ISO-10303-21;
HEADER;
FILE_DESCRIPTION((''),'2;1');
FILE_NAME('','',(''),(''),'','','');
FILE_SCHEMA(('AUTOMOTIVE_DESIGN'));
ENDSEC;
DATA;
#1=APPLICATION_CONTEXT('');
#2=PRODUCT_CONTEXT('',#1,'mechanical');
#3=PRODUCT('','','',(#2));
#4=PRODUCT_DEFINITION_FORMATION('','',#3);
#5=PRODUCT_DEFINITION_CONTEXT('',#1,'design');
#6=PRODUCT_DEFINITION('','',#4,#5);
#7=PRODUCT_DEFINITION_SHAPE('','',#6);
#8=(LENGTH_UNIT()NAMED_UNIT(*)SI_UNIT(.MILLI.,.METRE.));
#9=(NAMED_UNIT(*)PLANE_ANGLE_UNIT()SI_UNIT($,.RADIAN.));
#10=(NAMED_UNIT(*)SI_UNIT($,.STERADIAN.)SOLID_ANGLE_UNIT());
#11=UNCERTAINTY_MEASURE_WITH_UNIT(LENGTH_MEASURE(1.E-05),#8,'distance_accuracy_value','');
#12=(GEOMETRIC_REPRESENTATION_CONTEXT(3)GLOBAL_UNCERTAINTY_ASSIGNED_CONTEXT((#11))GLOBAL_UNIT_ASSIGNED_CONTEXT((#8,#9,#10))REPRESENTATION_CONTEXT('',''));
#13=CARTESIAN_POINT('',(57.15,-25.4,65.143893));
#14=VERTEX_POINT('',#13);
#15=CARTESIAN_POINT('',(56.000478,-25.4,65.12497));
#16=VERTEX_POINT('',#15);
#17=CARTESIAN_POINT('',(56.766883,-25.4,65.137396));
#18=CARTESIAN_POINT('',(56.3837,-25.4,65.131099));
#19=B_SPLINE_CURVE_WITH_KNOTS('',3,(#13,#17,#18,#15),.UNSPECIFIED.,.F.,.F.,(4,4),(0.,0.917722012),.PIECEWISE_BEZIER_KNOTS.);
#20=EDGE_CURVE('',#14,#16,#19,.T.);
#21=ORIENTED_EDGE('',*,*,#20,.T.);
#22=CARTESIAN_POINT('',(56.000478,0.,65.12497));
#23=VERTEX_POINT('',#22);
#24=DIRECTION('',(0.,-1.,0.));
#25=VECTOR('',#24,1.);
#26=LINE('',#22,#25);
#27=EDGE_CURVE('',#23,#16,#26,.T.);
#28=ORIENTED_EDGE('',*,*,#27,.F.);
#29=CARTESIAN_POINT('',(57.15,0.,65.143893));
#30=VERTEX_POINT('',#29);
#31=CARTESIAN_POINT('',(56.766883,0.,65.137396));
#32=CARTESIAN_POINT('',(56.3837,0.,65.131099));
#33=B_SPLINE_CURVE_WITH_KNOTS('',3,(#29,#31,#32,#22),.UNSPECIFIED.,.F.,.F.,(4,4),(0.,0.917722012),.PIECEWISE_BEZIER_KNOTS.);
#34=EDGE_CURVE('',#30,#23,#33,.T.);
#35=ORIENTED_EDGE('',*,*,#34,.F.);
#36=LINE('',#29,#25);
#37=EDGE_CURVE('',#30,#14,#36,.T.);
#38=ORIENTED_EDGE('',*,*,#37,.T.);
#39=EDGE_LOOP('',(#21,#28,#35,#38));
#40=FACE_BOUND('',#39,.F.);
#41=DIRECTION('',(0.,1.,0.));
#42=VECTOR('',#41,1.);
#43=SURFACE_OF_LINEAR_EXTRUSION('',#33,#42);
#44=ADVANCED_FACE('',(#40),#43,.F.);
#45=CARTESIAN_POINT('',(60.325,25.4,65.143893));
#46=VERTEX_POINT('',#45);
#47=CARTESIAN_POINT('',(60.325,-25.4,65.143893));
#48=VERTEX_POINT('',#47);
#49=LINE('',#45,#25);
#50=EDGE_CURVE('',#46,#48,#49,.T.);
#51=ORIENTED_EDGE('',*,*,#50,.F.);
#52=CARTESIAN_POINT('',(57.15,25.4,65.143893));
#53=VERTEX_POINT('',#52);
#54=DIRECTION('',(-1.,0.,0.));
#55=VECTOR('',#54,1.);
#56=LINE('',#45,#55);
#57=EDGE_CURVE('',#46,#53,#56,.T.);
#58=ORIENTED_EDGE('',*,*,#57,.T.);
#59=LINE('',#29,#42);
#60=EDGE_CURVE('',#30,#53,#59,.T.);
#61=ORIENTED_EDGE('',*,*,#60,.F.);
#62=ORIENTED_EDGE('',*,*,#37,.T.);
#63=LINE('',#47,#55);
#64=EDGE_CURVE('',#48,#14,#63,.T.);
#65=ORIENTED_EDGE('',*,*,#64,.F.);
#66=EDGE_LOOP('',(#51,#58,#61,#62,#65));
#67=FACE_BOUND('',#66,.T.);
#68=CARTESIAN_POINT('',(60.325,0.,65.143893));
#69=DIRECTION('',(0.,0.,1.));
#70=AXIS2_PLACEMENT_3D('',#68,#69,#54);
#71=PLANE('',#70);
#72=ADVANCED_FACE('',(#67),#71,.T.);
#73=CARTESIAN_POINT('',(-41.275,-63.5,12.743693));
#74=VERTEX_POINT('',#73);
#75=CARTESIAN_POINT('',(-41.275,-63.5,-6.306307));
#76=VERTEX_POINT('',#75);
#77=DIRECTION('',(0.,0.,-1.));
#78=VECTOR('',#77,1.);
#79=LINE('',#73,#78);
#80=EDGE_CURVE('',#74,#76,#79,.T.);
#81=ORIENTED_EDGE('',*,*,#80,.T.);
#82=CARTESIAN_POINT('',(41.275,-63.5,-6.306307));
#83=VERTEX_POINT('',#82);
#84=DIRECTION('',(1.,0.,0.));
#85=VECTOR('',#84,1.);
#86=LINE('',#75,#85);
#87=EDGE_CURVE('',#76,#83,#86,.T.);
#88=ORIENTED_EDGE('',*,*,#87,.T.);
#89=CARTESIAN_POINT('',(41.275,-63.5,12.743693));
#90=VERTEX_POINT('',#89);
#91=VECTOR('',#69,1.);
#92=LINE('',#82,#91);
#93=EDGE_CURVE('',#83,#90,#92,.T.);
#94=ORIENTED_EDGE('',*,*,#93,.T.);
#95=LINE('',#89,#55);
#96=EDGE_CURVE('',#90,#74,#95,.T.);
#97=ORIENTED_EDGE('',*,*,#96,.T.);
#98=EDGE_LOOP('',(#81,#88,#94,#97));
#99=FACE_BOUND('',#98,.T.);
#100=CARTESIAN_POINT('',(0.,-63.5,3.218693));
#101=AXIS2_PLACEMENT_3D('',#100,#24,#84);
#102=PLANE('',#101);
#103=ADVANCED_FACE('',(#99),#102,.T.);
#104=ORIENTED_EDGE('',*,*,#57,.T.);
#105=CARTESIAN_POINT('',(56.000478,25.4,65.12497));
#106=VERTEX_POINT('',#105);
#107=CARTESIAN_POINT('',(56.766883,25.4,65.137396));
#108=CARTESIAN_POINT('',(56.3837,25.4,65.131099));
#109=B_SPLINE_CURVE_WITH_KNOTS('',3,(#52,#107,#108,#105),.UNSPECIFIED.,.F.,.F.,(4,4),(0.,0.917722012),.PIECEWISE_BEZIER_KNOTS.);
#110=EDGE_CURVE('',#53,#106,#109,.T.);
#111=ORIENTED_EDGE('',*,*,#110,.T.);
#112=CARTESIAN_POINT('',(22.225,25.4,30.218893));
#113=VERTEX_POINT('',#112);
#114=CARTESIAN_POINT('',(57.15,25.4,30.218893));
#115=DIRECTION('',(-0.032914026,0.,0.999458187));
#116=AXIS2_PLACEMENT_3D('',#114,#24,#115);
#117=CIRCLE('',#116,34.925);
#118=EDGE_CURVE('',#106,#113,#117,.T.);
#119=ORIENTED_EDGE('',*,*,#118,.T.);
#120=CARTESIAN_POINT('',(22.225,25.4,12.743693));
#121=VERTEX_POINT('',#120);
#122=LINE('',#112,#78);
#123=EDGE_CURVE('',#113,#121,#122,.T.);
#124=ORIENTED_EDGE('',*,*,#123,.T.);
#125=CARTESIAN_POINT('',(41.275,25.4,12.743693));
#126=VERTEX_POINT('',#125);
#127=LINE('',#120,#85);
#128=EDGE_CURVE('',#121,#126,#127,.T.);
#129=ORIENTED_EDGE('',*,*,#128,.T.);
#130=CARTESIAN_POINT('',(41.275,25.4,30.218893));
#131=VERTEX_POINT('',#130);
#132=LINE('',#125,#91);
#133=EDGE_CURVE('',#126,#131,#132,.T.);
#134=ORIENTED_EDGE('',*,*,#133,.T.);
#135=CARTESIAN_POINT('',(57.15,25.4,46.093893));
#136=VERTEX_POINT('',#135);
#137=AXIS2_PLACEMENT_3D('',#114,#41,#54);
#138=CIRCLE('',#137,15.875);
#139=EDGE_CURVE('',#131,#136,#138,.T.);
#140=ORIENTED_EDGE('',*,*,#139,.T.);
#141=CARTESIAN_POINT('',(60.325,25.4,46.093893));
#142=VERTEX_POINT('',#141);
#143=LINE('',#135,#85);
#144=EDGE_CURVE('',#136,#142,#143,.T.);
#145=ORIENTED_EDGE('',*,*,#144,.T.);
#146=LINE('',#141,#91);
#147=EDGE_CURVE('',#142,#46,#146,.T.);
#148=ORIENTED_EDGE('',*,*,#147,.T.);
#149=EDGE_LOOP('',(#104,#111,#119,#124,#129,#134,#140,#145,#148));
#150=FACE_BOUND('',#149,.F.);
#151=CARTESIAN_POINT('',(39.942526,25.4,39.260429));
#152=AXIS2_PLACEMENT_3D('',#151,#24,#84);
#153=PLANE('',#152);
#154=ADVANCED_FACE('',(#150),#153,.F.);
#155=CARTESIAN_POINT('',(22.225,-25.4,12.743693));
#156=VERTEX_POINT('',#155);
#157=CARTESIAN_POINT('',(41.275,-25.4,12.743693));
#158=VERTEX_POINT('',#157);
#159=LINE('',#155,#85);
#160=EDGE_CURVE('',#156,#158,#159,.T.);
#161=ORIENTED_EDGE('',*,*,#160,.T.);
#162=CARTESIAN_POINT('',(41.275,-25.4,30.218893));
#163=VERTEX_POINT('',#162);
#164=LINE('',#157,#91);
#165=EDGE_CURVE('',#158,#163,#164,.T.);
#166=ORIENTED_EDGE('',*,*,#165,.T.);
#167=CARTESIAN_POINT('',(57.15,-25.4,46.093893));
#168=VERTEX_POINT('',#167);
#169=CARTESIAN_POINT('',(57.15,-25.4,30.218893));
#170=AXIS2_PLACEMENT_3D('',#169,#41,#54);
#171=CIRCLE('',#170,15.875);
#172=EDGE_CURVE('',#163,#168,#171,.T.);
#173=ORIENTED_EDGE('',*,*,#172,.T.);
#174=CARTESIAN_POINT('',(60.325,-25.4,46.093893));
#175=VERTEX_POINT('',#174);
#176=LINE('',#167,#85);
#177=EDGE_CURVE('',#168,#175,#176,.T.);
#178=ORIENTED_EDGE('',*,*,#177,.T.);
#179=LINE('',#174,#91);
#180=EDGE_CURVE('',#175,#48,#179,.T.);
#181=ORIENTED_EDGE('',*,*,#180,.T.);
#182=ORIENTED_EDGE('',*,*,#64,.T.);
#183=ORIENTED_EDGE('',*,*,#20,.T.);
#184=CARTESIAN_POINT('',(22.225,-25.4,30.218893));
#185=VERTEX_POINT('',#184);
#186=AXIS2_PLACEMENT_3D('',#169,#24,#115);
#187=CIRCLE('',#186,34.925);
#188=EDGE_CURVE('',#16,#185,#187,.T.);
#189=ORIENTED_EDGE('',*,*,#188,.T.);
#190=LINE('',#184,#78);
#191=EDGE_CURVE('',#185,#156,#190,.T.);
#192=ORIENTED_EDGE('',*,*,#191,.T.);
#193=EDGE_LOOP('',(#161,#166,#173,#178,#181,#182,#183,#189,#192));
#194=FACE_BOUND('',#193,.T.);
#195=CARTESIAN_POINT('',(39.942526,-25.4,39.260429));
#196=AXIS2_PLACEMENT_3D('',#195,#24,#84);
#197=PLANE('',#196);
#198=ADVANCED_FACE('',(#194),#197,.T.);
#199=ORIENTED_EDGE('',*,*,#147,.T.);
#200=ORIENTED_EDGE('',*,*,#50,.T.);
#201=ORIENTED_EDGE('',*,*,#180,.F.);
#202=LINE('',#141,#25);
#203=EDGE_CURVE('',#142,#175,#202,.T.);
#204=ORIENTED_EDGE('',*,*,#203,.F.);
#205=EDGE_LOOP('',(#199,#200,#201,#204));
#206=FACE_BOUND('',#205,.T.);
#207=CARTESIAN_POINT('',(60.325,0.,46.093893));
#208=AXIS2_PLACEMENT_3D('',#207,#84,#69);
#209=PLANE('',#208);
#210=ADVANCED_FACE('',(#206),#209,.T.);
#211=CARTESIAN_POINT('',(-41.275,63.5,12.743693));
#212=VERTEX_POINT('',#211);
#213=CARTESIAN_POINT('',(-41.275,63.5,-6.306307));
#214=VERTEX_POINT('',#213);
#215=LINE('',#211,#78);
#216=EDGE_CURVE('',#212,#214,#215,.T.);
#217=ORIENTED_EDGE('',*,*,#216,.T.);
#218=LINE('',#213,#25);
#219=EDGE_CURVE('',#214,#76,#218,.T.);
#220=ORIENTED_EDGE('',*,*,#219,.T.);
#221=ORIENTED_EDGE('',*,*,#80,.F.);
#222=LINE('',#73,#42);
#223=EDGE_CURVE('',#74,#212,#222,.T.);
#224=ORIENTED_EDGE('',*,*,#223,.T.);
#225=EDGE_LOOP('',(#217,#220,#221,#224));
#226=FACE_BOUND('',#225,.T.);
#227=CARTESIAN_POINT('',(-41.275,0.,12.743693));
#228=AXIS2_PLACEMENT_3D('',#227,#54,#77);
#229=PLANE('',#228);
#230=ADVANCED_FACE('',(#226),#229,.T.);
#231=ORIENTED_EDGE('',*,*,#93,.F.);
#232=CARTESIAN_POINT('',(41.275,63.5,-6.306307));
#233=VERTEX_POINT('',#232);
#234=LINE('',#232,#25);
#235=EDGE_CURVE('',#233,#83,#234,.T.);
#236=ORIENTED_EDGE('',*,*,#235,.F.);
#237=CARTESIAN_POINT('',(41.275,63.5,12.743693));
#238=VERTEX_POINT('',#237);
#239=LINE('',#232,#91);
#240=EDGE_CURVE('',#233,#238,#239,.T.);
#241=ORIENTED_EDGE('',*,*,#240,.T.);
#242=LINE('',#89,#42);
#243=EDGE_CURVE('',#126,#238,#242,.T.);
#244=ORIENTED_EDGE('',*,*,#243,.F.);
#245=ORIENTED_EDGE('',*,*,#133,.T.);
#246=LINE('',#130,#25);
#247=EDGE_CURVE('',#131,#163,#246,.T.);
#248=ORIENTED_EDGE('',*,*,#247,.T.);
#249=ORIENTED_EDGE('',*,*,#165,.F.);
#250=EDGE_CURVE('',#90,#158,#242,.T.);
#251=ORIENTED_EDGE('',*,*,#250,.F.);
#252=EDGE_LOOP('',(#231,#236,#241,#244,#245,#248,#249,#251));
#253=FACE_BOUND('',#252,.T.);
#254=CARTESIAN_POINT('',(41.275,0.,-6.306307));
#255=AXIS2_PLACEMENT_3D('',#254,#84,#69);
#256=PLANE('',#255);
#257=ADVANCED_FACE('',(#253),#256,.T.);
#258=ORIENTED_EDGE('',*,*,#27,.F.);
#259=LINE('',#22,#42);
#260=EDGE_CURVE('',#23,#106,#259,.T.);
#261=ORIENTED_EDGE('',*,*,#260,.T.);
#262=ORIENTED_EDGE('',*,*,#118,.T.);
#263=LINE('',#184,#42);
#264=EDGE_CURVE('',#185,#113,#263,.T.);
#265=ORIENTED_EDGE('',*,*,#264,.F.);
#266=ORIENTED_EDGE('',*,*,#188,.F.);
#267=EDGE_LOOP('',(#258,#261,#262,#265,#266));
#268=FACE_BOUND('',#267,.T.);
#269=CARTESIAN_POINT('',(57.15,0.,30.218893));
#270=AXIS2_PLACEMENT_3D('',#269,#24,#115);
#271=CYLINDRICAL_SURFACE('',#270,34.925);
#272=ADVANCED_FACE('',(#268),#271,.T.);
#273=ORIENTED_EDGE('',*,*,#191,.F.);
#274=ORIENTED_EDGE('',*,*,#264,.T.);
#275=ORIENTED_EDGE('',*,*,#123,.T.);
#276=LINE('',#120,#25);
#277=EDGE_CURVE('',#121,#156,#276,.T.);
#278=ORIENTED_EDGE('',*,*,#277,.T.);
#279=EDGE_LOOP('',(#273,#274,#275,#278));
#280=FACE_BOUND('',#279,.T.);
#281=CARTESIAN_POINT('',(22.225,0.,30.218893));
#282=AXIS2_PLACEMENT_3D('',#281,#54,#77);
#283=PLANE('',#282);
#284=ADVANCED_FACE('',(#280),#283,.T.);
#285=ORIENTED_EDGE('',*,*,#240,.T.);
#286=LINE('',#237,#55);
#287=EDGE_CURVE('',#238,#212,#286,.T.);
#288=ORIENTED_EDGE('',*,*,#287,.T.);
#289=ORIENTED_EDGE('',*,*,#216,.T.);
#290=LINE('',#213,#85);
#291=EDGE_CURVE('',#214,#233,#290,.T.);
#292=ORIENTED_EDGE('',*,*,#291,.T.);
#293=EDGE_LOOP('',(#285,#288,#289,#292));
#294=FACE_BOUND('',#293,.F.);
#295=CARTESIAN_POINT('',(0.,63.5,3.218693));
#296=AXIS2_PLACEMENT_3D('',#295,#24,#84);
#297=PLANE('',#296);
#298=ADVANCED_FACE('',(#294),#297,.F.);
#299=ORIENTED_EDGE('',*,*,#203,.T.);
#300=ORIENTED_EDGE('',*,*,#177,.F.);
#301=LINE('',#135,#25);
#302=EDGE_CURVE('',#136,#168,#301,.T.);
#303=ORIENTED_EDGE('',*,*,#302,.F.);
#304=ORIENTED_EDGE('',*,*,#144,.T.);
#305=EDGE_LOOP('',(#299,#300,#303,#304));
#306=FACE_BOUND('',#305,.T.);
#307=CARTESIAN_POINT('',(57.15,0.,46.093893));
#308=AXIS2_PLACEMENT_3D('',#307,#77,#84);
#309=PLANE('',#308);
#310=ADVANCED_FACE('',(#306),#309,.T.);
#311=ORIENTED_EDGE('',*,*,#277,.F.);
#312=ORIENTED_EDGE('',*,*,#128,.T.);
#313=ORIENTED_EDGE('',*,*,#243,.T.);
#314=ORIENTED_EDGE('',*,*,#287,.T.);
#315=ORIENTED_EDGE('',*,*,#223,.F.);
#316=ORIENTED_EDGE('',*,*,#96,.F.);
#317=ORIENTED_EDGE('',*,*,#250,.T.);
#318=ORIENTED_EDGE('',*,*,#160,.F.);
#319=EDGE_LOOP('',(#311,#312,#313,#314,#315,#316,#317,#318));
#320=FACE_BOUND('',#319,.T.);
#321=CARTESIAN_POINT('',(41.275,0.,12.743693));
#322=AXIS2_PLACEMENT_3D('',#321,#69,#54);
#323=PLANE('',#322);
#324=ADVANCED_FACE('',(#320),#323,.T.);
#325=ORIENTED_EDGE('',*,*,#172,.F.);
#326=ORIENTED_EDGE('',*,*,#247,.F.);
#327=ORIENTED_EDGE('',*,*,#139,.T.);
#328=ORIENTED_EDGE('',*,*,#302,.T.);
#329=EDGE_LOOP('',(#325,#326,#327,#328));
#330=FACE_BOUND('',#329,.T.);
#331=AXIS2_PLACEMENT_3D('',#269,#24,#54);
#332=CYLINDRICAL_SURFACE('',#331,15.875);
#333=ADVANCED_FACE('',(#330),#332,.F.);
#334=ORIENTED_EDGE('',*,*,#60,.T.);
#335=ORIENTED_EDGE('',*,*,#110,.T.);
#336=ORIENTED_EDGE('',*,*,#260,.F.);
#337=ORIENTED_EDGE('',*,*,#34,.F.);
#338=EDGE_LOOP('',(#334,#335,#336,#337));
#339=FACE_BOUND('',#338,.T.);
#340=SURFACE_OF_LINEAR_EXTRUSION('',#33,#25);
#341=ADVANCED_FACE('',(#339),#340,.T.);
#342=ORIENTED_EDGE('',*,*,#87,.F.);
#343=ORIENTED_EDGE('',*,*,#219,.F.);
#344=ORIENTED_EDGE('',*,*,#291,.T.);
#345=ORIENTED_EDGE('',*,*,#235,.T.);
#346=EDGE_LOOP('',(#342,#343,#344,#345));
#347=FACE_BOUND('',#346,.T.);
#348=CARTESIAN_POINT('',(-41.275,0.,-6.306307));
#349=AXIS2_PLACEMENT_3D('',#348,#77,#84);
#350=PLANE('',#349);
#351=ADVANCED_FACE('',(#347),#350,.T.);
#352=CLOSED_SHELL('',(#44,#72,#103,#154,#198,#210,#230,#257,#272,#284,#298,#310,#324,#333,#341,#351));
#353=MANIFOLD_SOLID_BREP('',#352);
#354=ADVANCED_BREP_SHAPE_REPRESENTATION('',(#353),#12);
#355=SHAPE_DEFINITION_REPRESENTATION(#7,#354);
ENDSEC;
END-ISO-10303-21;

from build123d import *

# Parameters (mm, degrees)
F1_DEPTH = 63.5
F2_DEPTH = 25.4


# Not quite as in the source:
# - a feature of the source that left no trace in its solid (it failed there, or was rolled back) is left out


with BuildPart() as f1:
    # F0 (on Front) → F1 (new body, symmetric)
    with BuildSketch(Plane.XZ):
        Polygon((22.225, 12.7436925435), (-41.275, 12.7436925435), (-41.275, -6.3063074565), (41.275, -6.3063074565), (41.275, 12.7436925435), align=None)
    extrude(amount=F1_DEPTH, both=True)

    # F0 (on Front) → F2 (join, symmetric)
    with BuildSketch(Plane.XZ):
        with BuildLine():
            Line((22.225, 30.2188925435), (22.225, 12.7436925435))
            Line((22.225, 12.7436925435), (41.275, 12.7436925435))
            Line((41.275, 12.7436925435), (41.275, 30.2188925435))
            ThreePointArc((41.275, 30.2188925435), (45.9246798487, 41.4442126948), (57.15, 46.0938925435))
            Line((57.15, 46.0938925435), (60.325, 46.0938925435))
            Line((60.325, 46.0938925435), (60.325, 65.1438925435))
            Line((60.325, 65.1438925435), (57.15, 65.1438925435))
            add(Edge.make_bspline(
                [(57.15, 65.1438925435), (56.7668826582, 65.1373961276), (56.3837003417, 65.1310994591), (56.0004776373, 65.1249697126)],
                knots=[0, 0, 0, 0, 0.9177220122, 0.9177220122, 0.9177220122, 0.9177220122], degree=3))
            ThreePointArc((56.0004776373, 65.1249697126), (32.0511684185, 54.5047789437), (22.225, 30.2188925435))
        make_face()
    extrude(amount=F2_DEPTH, both=True)


solid = f1.part
